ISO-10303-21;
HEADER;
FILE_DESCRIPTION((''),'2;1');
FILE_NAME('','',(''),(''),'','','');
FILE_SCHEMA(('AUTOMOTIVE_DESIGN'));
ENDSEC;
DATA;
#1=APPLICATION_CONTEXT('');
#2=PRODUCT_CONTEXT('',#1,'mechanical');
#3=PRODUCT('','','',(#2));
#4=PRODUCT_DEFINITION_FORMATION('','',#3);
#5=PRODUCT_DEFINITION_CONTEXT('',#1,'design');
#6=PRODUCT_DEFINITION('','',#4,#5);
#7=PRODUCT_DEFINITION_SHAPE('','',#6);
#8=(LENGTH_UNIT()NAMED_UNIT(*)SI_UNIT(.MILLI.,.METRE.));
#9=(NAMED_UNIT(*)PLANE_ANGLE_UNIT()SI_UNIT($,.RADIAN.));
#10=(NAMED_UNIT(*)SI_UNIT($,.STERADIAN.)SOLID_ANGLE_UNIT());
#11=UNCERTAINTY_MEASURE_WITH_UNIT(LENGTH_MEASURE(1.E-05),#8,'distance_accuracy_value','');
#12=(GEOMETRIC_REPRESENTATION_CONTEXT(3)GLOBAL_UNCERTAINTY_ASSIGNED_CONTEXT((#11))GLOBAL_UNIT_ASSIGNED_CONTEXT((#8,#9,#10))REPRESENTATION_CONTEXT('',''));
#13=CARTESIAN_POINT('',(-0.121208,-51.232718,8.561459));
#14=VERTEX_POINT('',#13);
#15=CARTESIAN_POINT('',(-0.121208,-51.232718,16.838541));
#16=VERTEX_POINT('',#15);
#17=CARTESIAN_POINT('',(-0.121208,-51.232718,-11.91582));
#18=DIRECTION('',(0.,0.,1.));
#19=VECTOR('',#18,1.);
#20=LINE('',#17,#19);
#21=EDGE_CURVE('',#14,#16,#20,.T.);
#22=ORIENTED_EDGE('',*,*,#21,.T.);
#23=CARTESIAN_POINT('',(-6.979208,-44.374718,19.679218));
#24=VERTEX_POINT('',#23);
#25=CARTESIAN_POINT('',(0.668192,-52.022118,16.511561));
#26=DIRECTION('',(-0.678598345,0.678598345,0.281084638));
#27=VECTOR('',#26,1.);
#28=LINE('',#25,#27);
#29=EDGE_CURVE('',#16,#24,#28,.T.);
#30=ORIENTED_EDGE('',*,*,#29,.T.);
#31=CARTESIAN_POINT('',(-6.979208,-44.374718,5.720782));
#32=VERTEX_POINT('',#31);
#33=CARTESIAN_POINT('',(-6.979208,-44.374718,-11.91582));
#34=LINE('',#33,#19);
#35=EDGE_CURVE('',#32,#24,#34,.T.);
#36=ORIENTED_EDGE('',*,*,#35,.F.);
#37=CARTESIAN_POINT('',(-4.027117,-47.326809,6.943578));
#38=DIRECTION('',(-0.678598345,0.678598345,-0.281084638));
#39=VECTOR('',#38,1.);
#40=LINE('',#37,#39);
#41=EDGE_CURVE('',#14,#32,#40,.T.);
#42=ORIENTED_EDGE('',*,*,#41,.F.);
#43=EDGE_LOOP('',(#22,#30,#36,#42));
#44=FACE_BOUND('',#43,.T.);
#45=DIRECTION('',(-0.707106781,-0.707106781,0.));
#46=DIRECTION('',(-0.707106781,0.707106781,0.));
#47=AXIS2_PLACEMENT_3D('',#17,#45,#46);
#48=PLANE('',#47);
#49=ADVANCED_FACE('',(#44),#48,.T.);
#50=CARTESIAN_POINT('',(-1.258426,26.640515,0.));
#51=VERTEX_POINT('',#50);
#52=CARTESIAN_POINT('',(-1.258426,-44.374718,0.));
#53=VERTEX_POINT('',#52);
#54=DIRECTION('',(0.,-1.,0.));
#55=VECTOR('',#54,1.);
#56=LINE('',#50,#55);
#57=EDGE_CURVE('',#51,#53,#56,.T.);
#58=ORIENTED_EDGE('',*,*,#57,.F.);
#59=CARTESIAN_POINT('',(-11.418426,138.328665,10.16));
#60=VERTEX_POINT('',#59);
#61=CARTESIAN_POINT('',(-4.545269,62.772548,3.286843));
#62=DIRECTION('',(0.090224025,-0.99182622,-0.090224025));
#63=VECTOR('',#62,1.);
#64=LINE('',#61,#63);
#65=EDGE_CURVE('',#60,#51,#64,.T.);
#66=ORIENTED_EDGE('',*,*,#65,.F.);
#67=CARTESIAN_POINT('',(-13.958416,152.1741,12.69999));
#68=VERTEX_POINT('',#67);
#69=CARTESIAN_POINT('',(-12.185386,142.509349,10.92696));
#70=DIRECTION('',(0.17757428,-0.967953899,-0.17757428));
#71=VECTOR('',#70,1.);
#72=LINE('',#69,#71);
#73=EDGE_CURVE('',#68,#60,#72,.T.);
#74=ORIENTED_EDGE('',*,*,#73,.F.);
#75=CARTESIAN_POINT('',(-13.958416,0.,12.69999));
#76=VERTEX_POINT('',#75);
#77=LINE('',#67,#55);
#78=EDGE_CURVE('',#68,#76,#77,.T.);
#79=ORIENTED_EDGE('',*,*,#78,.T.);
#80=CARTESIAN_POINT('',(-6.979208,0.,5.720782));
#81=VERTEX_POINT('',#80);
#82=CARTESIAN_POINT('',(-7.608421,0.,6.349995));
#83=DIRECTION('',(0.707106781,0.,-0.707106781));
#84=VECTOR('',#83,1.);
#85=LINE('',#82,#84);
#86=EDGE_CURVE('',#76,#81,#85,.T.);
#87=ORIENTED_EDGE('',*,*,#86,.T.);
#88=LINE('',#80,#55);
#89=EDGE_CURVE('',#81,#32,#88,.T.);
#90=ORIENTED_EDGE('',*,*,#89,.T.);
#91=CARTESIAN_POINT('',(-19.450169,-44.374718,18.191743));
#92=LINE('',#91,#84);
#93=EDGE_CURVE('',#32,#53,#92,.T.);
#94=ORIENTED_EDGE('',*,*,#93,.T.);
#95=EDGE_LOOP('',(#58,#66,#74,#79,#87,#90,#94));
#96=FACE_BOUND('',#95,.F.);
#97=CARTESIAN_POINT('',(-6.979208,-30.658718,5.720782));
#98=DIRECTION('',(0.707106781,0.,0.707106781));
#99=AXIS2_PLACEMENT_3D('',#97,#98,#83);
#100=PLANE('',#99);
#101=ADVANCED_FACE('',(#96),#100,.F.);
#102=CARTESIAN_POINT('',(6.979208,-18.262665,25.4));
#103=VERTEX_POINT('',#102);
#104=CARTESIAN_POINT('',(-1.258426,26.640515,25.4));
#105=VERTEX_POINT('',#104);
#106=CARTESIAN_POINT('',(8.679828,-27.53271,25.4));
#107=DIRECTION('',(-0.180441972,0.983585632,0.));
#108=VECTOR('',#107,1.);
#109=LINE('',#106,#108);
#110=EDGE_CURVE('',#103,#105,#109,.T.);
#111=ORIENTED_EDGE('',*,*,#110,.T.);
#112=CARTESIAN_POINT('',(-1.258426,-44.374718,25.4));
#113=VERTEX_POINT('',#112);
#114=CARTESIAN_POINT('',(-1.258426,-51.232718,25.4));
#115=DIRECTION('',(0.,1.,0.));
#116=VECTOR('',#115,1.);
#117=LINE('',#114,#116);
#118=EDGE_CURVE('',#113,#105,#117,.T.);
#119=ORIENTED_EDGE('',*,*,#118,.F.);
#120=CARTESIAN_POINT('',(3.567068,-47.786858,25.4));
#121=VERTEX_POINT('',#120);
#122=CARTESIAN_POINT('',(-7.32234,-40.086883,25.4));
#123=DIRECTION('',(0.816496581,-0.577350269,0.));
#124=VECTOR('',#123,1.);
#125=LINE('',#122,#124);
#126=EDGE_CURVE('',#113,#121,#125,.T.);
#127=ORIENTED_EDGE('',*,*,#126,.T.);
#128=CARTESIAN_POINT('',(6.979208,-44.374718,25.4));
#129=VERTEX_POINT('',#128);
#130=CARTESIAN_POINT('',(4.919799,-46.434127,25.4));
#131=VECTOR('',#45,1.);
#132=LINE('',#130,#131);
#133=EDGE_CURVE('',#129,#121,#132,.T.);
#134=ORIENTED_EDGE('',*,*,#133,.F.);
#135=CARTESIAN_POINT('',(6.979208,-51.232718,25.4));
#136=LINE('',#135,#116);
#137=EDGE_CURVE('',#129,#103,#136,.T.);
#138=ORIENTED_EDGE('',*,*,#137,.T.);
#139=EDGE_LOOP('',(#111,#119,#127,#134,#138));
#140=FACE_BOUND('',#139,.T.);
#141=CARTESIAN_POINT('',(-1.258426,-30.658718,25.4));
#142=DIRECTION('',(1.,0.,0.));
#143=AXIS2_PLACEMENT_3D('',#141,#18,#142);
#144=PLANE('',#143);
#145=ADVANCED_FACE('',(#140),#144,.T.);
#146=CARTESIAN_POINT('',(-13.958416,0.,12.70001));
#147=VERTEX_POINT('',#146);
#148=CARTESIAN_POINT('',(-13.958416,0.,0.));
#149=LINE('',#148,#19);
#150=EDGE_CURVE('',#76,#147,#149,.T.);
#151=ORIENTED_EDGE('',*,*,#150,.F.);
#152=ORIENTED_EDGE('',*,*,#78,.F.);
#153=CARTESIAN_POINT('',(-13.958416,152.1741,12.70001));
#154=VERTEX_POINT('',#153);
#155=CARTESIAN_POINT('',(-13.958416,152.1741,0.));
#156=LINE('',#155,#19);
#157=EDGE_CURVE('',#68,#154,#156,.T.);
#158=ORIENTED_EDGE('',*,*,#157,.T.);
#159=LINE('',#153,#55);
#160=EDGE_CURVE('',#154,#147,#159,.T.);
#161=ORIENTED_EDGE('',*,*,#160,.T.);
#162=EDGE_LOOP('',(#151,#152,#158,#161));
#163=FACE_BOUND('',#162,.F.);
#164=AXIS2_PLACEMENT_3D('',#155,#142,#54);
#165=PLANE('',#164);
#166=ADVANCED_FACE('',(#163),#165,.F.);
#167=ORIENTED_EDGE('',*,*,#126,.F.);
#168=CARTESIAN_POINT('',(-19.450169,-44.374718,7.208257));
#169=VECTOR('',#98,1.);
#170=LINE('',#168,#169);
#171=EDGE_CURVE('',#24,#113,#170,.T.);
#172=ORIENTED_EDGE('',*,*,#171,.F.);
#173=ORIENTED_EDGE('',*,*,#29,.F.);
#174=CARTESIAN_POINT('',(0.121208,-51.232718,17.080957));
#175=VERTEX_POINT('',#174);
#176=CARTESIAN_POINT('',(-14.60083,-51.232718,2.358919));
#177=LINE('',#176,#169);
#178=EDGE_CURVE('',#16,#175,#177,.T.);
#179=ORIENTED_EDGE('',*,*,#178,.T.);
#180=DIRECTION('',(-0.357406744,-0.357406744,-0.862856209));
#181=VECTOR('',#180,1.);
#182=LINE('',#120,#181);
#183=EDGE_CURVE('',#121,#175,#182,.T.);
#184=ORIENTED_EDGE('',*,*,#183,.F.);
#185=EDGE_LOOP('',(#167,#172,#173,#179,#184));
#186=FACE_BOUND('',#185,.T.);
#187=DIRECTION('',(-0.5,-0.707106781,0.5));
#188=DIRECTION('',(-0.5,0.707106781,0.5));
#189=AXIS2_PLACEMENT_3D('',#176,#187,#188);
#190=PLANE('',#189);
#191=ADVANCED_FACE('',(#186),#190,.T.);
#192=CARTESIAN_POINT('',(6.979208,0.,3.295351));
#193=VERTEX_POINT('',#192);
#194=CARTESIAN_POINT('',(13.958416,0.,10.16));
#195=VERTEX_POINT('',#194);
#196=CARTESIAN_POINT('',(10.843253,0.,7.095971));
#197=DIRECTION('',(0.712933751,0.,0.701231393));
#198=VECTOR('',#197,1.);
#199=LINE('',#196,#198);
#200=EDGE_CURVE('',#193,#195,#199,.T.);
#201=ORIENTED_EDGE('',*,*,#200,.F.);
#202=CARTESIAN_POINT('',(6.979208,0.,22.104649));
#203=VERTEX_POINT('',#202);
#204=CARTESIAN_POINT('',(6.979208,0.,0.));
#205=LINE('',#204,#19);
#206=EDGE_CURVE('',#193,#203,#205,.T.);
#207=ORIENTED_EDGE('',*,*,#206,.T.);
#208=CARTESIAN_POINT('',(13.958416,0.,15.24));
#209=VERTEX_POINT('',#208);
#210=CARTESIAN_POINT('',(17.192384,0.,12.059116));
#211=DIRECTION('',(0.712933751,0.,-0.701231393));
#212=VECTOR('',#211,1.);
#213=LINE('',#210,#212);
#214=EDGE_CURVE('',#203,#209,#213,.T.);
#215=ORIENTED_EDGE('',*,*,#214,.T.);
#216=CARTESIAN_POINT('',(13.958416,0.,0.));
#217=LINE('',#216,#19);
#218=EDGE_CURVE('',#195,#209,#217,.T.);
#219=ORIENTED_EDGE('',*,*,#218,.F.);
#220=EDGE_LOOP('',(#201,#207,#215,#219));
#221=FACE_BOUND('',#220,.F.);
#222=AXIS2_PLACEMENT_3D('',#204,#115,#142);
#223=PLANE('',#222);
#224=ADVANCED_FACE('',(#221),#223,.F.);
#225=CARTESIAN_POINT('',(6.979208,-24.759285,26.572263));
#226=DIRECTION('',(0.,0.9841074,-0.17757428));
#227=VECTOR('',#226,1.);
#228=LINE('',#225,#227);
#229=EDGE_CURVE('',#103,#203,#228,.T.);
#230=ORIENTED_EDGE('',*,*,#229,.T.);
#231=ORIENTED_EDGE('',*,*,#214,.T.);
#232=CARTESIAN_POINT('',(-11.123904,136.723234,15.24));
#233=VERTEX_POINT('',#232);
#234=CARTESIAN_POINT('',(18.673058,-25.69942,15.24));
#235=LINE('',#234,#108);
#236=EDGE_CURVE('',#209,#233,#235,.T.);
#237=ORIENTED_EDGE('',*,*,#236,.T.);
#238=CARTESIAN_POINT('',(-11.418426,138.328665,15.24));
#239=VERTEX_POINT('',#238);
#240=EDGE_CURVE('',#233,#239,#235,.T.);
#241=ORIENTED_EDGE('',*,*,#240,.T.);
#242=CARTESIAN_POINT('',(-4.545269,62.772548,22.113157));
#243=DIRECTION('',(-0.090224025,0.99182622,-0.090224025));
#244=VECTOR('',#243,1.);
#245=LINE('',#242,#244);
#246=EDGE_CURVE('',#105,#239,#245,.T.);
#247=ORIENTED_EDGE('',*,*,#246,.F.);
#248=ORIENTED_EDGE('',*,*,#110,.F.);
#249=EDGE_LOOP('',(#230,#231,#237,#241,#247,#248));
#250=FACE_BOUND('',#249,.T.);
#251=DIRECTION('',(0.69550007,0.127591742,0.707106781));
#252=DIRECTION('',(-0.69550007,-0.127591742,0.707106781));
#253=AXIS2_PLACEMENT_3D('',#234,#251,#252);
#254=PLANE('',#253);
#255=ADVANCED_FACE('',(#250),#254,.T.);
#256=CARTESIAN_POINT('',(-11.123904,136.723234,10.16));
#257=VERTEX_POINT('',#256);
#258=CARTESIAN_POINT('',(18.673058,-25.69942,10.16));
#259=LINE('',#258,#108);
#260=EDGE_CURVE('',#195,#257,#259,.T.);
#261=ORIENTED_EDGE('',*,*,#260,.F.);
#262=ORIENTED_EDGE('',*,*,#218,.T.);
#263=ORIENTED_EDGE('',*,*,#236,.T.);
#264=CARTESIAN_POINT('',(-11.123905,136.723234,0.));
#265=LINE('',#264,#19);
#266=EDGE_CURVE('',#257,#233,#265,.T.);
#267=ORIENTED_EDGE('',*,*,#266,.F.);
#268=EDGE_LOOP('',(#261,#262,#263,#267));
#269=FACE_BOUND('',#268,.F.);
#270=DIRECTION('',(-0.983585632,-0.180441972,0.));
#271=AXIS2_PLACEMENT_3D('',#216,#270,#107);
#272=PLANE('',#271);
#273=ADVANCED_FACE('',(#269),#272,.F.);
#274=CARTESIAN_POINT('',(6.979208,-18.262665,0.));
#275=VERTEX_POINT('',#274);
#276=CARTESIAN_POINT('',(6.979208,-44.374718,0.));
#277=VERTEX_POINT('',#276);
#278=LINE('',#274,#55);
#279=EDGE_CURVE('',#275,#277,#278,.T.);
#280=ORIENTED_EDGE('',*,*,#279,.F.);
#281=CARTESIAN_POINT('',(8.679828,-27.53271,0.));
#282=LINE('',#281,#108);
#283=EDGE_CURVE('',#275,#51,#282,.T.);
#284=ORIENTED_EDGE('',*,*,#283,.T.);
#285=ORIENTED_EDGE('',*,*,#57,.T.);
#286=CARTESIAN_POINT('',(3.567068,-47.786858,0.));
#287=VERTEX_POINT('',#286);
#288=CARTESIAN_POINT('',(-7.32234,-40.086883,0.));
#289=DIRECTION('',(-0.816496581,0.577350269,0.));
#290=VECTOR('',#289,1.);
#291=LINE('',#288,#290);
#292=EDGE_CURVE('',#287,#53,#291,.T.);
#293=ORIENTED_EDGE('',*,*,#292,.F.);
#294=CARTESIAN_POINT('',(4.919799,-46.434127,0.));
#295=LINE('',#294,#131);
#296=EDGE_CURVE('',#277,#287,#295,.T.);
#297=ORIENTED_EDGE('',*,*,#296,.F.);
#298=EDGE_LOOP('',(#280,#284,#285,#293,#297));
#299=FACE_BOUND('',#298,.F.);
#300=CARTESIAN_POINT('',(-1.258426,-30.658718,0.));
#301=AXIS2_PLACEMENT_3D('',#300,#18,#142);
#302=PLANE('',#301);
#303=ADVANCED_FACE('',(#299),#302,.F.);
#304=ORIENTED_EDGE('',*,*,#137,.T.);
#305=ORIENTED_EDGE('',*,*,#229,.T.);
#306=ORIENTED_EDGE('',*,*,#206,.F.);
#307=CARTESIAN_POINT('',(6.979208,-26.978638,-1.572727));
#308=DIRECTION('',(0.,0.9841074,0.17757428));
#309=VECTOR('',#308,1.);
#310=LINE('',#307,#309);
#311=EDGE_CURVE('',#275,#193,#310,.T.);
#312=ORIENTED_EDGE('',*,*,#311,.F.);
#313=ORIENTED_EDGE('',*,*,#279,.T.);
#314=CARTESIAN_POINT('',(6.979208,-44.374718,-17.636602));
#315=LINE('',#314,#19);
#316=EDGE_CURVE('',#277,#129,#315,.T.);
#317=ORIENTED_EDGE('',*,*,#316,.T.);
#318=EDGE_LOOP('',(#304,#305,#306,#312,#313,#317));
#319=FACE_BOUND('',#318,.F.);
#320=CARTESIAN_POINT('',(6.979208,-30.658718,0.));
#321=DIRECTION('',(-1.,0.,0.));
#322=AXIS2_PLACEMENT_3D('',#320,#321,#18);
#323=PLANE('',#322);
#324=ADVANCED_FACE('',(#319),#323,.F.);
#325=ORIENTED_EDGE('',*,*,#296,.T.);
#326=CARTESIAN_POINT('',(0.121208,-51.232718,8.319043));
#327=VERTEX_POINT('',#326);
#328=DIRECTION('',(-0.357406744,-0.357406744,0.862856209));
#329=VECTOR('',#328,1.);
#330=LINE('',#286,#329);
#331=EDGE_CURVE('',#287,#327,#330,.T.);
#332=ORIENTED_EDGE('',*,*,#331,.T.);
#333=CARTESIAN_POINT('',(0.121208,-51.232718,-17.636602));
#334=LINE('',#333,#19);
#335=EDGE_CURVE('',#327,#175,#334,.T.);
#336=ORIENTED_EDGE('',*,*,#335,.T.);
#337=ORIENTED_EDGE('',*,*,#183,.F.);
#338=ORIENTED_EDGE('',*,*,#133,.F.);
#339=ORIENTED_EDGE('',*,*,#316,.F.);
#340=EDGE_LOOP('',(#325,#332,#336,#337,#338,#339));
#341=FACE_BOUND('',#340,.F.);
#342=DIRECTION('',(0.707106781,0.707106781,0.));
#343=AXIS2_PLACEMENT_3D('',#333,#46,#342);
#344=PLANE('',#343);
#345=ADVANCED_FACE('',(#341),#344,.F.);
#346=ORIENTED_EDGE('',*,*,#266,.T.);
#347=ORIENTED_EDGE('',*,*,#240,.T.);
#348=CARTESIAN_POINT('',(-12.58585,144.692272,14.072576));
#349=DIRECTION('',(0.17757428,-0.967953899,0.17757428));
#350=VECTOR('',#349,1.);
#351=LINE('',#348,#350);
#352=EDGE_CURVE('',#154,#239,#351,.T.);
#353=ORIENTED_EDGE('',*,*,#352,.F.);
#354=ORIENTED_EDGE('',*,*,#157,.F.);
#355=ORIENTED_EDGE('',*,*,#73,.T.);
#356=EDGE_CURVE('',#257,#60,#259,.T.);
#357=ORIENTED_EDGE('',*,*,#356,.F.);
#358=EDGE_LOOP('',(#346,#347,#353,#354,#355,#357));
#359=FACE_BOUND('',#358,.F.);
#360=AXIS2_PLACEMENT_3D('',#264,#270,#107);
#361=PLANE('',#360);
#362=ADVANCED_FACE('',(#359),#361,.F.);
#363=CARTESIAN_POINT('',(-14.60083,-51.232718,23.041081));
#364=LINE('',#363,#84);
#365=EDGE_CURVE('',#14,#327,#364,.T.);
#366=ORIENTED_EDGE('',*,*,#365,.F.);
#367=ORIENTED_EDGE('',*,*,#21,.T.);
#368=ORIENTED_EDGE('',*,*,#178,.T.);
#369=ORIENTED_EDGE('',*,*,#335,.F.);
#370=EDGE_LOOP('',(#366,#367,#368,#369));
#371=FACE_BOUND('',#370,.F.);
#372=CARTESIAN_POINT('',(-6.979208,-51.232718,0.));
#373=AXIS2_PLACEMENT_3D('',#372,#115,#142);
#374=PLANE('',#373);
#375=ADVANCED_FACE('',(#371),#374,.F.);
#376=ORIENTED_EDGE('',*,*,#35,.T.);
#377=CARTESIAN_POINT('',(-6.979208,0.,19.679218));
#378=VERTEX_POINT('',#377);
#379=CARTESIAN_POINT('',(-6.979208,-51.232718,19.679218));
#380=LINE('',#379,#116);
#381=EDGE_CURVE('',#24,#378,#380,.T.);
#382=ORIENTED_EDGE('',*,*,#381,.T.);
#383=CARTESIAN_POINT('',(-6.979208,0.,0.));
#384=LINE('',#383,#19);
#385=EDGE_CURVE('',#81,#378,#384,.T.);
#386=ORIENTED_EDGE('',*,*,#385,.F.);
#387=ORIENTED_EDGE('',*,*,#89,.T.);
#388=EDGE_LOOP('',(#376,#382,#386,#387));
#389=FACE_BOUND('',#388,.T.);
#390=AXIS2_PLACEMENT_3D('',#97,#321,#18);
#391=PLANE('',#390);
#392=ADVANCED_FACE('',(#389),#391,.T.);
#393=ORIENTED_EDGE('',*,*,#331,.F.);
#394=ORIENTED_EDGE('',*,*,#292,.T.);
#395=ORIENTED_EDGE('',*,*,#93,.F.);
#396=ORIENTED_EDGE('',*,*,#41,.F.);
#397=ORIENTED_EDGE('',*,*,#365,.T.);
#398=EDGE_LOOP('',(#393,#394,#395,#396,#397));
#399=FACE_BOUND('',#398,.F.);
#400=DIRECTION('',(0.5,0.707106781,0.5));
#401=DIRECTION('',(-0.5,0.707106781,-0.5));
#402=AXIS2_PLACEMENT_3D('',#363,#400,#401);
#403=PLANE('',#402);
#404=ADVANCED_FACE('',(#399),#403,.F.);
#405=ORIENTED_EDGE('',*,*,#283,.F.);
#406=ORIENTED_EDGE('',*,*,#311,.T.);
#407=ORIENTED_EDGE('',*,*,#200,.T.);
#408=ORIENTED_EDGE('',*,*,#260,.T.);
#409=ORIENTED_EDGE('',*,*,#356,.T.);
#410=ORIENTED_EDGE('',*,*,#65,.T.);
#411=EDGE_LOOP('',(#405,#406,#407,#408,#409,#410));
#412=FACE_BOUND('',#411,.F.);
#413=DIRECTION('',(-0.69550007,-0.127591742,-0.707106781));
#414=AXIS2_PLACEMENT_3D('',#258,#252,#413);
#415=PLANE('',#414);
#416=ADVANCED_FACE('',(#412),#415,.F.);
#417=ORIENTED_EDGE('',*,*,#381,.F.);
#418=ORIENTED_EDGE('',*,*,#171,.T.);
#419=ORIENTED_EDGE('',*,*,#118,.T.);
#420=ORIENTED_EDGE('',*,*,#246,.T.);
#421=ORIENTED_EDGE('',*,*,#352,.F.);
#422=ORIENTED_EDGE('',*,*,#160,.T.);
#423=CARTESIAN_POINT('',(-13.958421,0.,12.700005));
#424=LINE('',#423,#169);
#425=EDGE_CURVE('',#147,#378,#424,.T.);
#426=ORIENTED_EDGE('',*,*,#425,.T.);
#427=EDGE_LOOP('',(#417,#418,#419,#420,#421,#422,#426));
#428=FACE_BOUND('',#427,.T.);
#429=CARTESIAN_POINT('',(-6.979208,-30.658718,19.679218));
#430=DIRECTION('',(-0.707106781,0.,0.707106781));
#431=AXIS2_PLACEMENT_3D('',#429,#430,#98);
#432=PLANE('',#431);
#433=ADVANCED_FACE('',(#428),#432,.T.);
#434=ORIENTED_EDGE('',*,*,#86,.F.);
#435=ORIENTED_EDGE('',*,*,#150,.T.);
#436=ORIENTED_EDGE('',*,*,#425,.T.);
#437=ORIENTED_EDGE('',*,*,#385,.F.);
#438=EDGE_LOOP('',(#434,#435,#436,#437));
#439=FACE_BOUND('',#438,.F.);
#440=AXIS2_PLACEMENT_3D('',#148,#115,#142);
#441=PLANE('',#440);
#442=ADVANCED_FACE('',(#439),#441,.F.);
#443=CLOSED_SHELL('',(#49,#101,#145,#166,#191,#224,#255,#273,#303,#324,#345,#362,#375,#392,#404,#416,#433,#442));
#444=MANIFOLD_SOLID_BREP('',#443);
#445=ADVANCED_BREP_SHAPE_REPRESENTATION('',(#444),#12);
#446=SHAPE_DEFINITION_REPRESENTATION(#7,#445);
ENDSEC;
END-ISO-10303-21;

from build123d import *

# Parameters (mm, degrees)
F1_DEPTH     = 25.4
F2_SIZE      = 12.69999
F3_T1_DEPTH  = 188.8441409877
F4_DEPTH     = 20.574
F5_T1_DEPTH  = 49.2316398108
F5_T3_DEPTH  = 43.3636113916
F5_T5_DEPTH  = 43.3636113916
F5_T7_DEPTH  = 60.6732038629
F5_T12_DEPTH = 43.5108377847
F5_T17_DEPTH = 43.5108377847
F5_T22_DEPTH = 43.5108377847
F5_T27_DEPTH = 43.5108377847


# Not quite as in the source:
# - a fillet or chamfer that OpenCascade refuses, or shapes differently, is made with other operations: its cross-section is extruded or revolved along the edge and cut away or added
# - a fillet or chamfer is up to 0.001 mm smaller than in the source, because OpenCascade refuses the exact size


with BuildPart() as f1:
    # F0 (on Top) → F1 (new body)
    with BuildSketch(Plane.XY):
        Polygon((-6.9792079739, 0), (0, 0), (6.9792079739, 0), (13.9584159479, 0), (0, 76.0870501399), (-11.1239045018, 136.72323427), (-13.9584159479, 152.1741002798), (-13.9584159479, 76.0870501399), (-13.9584159479, 0), align=None)
        Polygon((6.9792079739, 0), (0, 0), (-6.9792079739, 0), (-6.9792079739, -30.6587181985), (-4.935038276, -30.6587181985), (6.9792079739, -30.6587181985), align=None)
    extrude(amount=F1_DEPTH)

    # F2 (size 12.7 in the source; OpenCascade refuses exactly that, so slightly less here)
    f2_edges = [f1.edges().sort_by_distance(p)[0] for p in [
        (-13.958416, 76.08705, 25.4),
        (-13.958416, 76.08705, 0),
    ]]
    chamfer(f2_edges, length=F2_SIZE)

    # F3: chamfer of 10.16 on 2 edges, made by hand

    # F3_s2 → F3_t1 (cut)
    with BuildSketch(Plane(origin=(5.1691181491, -28.1767611209, 0), x_dir=(0, 0, 1), z_dir=(-0.1804419719, 0.9835856316, 0))):
        Polygon((15.24, 13.7292973667), (25.4, 3.5692973667), (25.4, 13.7292973667), align=None)
        Polygon((10.16, 13.7292973667), (0, 3.5692973667), (0, 13.7292973667), align=None)
    extrude(amount=F3_T1_DEPTH, mode=Mode.SUBTRACT)

    # F4 (add): a face of the model
    f4_faces = [f1.faces().sort_by_distance(p)[0] for p in [
        (0.5158291465, -30.6587181985, 12.7),
    ]]
    extrude(f4_faces, amount=F4_DEPTH)

    # F5: chamfer of 6.858 on 6 edges, made by hand

    # F5_s2 → F5_t1 (cut)
    with BuildSketch(Plane.XY.offset(-11.9158199054)):
        Polygon((-0.1212079739, -51.2327181985), (-6.9792079739, -44.3747181985), (-6.9792079739, -51.2327181985), align=None)
    extrude(amount=F5_T1_DEPTH, mode=Mode.SUBTRACT)

    # F5_s4 → F5_t3 (cut)
    with BuildSketch(Plane(origin=(-18.8209558228, 0, 18.8209558228), x_dir=(0, 1, 0), z_dir=(0.7071067812, 0, -0.7071067812))):
        Polygon((-51.2327181985, 5.9681584787), (-44.3747181985, -0.8898415213), (-51.2327181985, -0.8898415213), align=None)
    extrude(amount=F5_T3_DEPTH, mode=Mode.SUBTRACT)

    # F5_s6 → F5_t5 (cut)
    with BuildSketch(Plane(origin=(-6.1209558228, 0, -6.1209558228), x_dir=(0, 1, 0), z_dir=(0.7071067812, 0, 0.7071067812))):
        Polygon((-51.2327181985, 11.9923537635), (-44.3747181985, 18.8503537635), (-51.2327181985, 18.8503537635), align=None)
    extrude(amount=F5_T5_DEPTH, mode=Mode.SUBTRACT)

    # F5_s8 → F5_t7 (cut)
    with BuildSketch(Plane.XY.offset(-17.6366019315)):
        Polygon((0.1212079739, -51.2327181985), (6.9792079739, -44.3747181985), (6.9792079739, -51.2327181985), align=None)
    extrude(amount=F5_T7_DEPTH, mode=Mode.SUBTRACT)


with BuildPart() as f5_tool10:
    # F5_s11 → F5_t12 (new body)
    with BuildSketch(Plane.YZ.offset(-18.8950278793)):
        Polygon((-51.2327181985, 6.858), (-44.3747181985, 0), (-51.2327181985, 0), align=None)
    extrude(amount=F5_T12_DEPTH)

    split(bisect_by=Plane(origin=(-16.0034385627, -22.6322798599, -16.0034385627), x_dir=(0.8164965809, -0.5773502692, 0), z_dir=(-0.5, -0.7071067812, -0.5)), keep=Keep.TOP)


with BuildPart() as f1_1:
    add(f1.part)

    # F5_t9: cut F5_tool10
    add(f5_tool10.part, mode=Mode.SUBTRACT)


with BuildPart() as f5_tool15:
    # F5_s16 → F5_t17 (new body)
    with BuildSketch(Plane.YZ.offset(-18.8950278793)):
        Polygon((-51.2327181985, 6.858), (-44.3747181985, 0), (-51.2327181985, 0), align=None)
    extrude(amount=F5_T17_DEPTH)

    split(bisect_by=Plane(origin=(25.6769630862, -25.6769630862, 0), x_dir=(0, 0, 1), z_dir=(0.7071067812, -0.7071067812, 0)), keep=Keep.TOP)


with BuildPart() as f1_2:
    add(f1_1.part)

    # F5_t14: cut F5_tool15
    add(f5_tool15.part, mode=Mode.SUBTRACT)


with BuildPart() as f5_tool20:
    # F5_s21 → F5_t22 (new body)
    with BuildSketch(Plane.YZ.offset(-18.8950278793)):
        Polygon((-44.3747181985, 25.4), (-51.2327181985, 18.542), (-51.2327181985, 25.4), align=None)
    extrude(amount=F5_T22_DEPTH)

    split(bisect_by=Plane(origin=(-22.3534385627, -31.612535981, 22.3534385627), x_dir=(0.8164965809, -0.5773502692, 0), z_dir=(-0.5, -0.7071067812, 0.5)), keep=Keep.TOP)


with BuildPart() as f1_3:
    add(f1_2.part)

    # F5_t19: cut F5_tool20
    add(f5_tool20.part, mode=Mode.SUBTRACT)


with BuildPart() as f5_tool25:
    # F5_s26 → F5_t27 (new body)
    with BuildSketch(Plane.YZ.offset(-18.8950278793)):
        Polygon((-44.3747181985, 25.4), (-51.2327181985, 18.542), (-51.2327181985, 25.4), align=None)
    extrude(amount=F5_T27_DEPTH)

    split(bisect_by=Plane(origin=(25.6769630862, -25.6769630862, 0), x_dir=(0, 0, 1), z_dir=(0.7071067812, -0.7071067812, 0)), keep=Keep.TOP)


with BuildPart() as f1_4:
    add(f1_3.part)

    # F5_t24: cut F5_tool25
    add(f5_tool25.part, mode=Mode.SUBTRACT)


solid = f1_4.part
